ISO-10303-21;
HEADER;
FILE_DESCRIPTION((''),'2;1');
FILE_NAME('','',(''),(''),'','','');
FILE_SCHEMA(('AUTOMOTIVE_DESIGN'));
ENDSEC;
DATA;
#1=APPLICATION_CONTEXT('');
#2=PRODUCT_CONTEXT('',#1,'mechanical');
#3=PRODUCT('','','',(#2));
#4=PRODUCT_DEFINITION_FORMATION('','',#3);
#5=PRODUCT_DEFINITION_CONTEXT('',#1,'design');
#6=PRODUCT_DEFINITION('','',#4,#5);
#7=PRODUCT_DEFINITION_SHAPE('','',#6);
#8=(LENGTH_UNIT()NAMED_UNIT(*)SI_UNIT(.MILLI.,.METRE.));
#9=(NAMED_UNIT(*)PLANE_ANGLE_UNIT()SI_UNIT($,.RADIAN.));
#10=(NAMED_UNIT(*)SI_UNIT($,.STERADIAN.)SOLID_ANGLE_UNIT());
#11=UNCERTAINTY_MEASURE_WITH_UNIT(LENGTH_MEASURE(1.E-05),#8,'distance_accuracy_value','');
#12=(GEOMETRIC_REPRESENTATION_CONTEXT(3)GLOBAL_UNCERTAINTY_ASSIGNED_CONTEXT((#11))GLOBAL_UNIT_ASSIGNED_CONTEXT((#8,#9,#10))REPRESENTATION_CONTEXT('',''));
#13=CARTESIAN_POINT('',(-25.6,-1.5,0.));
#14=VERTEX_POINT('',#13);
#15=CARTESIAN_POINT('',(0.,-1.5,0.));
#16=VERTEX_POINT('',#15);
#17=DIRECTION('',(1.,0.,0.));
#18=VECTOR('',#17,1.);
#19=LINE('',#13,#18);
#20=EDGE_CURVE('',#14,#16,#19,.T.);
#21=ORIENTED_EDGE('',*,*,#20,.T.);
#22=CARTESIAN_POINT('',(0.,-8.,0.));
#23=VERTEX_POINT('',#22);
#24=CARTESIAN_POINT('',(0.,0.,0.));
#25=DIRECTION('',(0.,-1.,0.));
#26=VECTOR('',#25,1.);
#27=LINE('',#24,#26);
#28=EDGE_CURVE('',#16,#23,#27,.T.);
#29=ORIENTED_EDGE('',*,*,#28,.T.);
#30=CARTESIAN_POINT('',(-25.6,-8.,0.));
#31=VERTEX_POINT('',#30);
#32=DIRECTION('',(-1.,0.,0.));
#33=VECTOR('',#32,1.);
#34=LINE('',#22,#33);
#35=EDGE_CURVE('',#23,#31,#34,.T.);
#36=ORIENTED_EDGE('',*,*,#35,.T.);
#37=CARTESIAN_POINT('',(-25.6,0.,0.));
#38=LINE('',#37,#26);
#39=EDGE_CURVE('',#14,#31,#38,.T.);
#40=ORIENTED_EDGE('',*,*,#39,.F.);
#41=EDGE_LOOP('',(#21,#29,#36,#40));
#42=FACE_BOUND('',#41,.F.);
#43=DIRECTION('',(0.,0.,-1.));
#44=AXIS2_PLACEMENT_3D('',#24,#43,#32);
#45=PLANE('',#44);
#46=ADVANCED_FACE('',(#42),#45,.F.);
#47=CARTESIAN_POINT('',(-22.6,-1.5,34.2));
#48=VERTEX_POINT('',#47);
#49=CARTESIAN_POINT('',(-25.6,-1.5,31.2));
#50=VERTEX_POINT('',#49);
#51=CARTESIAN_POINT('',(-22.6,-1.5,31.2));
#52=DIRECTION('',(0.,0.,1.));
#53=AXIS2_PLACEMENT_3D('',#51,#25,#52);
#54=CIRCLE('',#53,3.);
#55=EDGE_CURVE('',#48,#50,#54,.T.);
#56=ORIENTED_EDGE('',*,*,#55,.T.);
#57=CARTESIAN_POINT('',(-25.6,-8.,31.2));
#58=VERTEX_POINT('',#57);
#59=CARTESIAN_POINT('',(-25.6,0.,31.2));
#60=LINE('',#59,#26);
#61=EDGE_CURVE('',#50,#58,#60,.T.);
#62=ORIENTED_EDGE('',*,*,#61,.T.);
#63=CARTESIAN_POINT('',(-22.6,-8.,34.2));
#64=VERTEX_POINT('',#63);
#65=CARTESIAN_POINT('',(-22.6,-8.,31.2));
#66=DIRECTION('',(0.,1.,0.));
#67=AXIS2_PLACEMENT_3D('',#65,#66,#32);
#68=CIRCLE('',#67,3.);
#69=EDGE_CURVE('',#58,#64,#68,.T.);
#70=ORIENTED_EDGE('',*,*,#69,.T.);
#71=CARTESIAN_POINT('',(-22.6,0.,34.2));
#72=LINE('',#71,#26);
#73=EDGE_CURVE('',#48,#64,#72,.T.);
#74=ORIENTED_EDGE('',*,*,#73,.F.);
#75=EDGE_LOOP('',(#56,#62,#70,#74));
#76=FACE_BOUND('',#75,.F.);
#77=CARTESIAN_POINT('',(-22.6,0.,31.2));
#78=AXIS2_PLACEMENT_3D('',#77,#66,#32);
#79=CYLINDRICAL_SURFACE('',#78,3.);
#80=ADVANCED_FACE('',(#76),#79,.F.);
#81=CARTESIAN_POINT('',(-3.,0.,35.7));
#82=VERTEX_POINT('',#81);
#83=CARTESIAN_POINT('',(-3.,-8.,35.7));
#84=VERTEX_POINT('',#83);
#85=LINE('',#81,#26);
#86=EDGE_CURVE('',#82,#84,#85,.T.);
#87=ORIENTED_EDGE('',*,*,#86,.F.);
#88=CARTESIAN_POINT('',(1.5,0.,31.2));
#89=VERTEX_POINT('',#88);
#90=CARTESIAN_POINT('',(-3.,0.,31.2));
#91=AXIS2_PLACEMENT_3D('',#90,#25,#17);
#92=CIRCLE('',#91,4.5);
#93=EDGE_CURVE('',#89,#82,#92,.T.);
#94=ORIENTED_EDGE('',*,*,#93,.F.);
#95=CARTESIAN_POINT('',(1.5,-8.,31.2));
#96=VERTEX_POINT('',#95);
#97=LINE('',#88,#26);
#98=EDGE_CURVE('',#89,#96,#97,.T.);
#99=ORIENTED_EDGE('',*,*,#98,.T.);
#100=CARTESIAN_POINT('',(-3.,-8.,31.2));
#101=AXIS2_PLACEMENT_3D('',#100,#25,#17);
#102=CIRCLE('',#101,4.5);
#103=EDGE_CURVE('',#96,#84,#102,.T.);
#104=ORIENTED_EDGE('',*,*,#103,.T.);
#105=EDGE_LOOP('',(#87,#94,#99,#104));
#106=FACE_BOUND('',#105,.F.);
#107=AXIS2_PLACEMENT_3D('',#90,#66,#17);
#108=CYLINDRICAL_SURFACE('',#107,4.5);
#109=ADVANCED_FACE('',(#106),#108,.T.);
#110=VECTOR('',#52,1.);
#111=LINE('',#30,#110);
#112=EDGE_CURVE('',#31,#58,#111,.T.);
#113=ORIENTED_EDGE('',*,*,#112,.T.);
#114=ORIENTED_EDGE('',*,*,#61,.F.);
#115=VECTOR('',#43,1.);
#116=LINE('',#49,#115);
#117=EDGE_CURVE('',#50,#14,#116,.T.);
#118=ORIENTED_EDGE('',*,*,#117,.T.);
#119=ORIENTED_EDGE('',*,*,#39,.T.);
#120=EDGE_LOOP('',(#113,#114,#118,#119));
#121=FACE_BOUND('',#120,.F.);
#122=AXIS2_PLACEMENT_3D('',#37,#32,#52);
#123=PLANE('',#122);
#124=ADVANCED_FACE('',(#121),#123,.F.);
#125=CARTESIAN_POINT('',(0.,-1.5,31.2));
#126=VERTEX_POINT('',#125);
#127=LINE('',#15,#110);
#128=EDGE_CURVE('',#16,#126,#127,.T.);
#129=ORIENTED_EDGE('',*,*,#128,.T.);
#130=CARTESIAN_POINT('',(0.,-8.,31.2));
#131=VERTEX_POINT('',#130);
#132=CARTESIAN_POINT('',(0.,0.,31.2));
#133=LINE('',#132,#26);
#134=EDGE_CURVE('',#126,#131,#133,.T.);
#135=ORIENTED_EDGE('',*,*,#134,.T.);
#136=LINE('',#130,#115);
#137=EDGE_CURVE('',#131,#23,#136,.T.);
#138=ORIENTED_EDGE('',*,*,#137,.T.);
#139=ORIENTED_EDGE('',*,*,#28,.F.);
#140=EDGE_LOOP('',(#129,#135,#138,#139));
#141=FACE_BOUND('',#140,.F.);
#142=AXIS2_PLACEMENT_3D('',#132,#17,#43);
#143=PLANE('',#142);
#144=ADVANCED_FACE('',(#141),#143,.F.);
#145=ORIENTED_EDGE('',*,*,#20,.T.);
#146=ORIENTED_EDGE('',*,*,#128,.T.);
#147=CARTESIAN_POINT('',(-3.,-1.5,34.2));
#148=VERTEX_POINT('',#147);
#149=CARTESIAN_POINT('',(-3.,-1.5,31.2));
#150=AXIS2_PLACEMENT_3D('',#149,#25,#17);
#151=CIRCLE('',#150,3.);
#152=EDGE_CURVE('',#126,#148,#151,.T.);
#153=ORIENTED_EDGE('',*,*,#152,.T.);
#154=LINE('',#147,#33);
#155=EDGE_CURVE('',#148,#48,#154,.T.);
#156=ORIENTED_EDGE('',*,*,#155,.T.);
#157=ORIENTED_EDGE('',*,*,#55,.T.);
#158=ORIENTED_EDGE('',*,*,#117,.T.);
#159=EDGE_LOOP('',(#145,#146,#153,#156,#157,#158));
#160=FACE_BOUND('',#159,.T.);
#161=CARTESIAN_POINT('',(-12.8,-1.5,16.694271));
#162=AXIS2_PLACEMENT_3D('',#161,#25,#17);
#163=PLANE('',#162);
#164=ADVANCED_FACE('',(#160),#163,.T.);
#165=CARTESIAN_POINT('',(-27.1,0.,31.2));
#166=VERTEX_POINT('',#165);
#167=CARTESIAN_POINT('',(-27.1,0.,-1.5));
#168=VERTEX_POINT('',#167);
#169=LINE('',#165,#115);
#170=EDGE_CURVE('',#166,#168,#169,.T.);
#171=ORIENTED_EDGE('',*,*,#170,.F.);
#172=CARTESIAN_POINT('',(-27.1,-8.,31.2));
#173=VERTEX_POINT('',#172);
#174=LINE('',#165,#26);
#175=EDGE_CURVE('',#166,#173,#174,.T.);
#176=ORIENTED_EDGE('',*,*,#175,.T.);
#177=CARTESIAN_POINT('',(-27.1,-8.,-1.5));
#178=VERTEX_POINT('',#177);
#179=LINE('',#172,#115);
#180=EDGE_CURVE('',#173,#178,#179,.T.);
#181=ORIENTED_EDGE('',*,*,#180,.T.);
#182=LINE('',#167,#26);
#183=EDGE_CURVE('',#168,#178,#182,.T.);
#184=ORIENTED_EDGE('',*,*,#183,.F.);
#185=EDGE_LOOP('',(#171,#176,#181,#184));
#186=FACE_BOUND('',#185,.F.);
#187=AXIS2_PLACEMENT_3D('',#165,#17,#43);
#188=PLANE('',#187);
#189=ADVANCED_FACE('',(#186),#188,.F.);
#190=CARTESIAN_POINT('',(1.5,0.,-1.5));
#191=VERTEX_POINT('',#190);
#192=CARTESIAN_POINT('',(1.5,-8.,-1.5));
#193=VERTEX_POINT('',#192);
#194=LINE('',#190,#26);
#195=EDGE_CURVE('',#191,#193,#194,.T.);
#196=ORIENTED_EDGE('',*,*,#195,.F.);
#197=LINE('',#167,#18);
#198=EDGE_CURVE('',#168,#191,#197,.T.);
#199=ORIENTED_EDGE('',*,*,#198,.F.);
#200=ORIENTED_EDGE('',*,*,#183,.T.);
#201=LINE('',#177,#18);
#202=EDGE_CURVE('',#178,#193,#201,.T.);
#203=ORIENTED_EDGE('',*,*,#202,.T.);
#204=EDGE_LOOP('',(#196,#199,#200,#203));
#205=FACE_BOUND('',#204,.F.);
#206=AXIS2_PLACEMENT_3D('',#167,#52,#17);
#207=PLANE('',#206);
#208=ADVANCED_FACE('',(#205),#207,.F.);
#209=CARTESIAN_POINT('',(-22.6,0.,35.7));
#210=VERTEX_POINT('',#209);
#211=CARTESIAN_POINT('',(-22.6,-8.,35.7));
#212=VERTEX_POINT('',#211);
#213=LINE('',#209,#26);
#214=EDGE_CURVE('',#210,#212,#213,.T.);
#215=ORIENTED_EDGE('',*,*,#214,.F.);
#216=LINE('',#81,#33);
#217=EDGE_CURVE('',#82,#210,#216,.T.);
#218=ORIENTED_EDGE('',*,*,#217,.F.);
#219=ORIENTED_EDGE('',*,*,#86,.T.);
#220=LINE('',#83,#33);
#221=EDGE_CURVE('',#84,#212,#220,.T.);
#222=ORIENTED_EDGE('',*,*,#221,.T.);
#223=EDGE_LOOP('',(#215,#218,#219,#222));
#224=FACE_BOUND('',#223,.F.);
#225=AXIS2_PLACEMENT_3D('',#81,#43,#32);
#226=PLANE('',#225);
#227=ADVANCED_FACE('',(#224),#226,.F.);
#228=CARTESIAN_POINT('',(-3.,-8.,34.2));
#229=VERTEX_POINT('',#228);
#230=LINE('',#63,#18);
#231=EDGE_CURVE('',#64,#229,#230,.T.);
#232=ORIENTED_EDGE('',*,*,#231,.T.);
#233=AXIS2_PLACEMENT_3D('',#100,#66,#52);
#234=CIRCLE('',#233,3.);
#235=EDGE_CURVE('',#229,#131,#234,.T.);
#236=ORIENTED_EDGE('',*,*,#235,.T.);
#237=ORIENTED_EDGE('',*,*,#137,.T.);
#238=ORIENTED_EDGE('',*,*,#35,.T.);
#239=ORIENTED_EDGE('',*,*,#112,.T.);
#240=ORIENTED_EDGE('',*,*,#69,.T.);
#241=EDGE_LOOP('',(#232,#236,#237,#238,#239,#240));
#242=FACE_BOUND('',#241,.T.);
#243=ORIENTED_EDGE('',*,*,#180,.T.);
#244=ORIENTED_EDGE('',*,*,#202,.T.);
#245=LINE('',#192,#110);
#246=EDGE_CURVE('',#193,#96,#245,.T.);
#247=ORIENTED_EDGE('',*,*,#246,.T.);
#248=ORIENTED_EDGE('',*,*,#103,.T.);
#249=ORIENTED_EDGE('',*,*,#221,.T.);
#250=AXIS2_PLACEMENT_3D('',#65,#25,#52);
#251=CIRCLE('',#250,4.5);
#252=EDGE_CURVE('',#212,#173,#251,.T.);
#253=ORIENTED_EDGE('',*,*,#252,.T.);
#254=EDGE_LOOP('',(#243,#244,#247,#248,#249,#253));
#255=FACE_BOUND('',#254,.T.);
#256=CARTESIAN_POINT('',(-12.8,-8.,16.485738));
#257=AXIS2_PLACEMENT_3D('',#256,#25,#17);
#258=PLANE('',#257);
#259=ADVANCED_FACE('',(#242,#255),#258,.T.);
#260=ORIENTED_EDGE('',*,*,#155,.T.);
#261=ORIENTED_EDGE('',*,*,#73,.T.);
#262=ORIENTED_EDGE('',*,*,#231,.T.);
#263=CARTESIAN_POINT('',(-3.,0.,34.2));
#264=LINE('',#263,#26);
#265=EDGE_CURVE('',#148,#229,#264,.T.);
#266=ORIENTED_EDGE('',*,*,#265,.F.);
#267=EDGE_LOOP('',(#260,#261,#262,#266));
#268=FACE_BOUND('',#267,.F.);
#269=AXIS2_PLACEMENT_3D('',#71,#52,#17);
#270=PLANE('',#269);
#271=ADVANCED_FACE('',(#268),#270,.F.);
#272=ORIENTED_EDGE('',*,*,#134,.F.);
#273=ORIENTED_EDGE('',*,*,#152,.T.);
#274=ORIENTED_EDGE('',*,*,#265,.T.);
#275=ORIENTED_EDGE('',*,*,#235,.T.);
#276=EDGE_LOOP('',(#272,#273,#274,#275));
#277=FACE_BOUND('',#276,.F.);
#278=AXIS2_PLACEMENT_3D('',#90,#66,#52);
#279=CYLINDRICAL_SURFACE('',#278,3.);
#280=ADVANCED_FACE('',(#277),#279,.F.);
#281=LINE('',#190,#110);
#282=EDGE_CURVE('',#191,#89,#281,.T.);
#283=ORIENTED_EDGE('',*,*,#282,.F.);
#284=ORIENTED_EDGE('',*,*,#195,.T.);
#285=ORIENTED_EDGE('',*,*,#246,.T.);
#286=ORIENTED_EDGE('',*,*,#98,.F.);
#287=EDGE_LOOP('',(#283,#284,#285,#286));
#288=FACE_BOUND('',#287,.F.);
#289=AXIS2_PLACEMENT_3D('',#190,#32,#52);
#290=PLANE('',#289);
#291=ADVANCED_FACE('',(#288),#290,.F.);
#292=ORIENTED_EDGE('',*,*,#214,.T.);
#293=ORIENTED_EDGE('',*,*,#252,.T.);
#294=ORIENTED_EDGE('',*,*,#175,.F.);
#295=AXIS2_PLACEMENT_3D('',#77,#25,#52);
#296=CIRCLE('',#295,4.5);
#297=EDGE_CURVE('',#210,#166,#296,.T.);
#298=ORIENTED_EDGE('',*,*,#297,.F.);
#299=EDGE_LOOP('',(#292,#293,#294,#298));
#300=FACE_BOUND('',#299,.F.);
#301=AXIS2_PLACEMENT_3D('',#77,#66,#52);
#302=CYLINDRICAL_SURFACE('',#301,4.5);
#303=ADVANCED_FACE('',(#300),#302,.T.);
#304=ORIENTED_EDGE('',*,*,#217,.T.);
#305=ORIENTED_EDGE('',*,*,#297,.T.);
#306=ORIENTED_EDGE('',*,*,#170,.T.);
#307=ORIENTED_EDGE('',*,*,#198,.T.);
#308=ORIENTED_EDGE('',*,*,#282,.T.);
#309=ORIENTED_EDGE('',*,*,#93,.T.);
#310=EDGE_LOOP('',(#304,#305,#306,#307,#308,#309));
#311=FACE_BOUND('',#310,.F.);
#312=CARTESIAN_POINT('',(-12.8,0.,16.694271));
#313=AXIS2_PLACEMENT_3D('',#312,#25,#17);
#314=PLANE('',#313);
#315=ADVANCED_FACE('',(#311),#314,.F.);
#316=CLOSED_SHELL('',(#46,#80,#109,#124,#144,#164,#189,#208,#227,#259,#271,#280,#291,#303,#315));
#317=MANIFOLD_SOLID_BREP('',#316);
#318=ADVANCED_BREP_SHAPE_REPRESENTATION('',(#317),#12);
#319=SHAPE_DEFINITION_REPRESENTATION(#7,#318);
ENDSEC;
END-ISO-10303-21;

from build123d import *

# Parameters (mm, degrees)
F1_DEPTH = 8
F2_DEPTH = 1.5


# Not quite as in the source:
# - a feature names something its author has since deleted; it is built from what else it names


with BuildPart() as f1:
    # F0 (on Front) → F1 (new body)
    with BuildSketch(Plane.XZ):
        with BuildLine():
            Line((-27.1, 31.2), (-27.1, -1.5))
            Line((-27.1, -1.5), (1.5, -1.5))
            Line((1.5, -1.5), (1.5, 31.2))
            ThreePointArc((1.5, 31.2), (0.1819805153, 34.3819805153), (-3, 35.7))
            Line((-3, 35.7), (-22.6, 35.7))
            ThreePointArc((-22.6, 35.7), (-25.7819805153, 34.3819805153), (-27.1, 31.2))
        make_face()
        with BuildLine():
            ThreePointArc((-25.6, 31.2), (-24.7213203436, 33.3213203436), (-22.6, 34.2))
            Line((-22.6, 34.2), (-3, 34.2))
            ThreePointArc((-3, 34.2), (-0.8786796564, 33.3213203436), (0, 31.2))
            Line((0, 31.2), (0, 0))
            Line((0, 0), (-25.6, 0))
            Line((-25.6, 0), (-25.6, 31.2))
        make_face(mode=Mode.SUBTRACT)
    extrude(amount=F1_DEPTH)

    # F0 (on Front) → F2 (join)
    with BuildSketch(Plane.XZ):
        with BuildLine():
            Line((-3, 34.2), (-22.6, 34.2))
            ThreePointArc((-22.6, 34.2), (-24.7213203436, 33.3213203436), (-25.6, 31.2))
            Line((-25.6, 31.2), (-25.6, 0))
            Line((-25.6, 0), (0, 0))
            Line((0, 0), (0, 31.2))
            ThreePointArc((0, 31.2), (-0.8786796564, 33.3213203436), (-3, 34.2))
        make_face()
    extrude(amount=F2_DEPTH)


solid = f1.part
